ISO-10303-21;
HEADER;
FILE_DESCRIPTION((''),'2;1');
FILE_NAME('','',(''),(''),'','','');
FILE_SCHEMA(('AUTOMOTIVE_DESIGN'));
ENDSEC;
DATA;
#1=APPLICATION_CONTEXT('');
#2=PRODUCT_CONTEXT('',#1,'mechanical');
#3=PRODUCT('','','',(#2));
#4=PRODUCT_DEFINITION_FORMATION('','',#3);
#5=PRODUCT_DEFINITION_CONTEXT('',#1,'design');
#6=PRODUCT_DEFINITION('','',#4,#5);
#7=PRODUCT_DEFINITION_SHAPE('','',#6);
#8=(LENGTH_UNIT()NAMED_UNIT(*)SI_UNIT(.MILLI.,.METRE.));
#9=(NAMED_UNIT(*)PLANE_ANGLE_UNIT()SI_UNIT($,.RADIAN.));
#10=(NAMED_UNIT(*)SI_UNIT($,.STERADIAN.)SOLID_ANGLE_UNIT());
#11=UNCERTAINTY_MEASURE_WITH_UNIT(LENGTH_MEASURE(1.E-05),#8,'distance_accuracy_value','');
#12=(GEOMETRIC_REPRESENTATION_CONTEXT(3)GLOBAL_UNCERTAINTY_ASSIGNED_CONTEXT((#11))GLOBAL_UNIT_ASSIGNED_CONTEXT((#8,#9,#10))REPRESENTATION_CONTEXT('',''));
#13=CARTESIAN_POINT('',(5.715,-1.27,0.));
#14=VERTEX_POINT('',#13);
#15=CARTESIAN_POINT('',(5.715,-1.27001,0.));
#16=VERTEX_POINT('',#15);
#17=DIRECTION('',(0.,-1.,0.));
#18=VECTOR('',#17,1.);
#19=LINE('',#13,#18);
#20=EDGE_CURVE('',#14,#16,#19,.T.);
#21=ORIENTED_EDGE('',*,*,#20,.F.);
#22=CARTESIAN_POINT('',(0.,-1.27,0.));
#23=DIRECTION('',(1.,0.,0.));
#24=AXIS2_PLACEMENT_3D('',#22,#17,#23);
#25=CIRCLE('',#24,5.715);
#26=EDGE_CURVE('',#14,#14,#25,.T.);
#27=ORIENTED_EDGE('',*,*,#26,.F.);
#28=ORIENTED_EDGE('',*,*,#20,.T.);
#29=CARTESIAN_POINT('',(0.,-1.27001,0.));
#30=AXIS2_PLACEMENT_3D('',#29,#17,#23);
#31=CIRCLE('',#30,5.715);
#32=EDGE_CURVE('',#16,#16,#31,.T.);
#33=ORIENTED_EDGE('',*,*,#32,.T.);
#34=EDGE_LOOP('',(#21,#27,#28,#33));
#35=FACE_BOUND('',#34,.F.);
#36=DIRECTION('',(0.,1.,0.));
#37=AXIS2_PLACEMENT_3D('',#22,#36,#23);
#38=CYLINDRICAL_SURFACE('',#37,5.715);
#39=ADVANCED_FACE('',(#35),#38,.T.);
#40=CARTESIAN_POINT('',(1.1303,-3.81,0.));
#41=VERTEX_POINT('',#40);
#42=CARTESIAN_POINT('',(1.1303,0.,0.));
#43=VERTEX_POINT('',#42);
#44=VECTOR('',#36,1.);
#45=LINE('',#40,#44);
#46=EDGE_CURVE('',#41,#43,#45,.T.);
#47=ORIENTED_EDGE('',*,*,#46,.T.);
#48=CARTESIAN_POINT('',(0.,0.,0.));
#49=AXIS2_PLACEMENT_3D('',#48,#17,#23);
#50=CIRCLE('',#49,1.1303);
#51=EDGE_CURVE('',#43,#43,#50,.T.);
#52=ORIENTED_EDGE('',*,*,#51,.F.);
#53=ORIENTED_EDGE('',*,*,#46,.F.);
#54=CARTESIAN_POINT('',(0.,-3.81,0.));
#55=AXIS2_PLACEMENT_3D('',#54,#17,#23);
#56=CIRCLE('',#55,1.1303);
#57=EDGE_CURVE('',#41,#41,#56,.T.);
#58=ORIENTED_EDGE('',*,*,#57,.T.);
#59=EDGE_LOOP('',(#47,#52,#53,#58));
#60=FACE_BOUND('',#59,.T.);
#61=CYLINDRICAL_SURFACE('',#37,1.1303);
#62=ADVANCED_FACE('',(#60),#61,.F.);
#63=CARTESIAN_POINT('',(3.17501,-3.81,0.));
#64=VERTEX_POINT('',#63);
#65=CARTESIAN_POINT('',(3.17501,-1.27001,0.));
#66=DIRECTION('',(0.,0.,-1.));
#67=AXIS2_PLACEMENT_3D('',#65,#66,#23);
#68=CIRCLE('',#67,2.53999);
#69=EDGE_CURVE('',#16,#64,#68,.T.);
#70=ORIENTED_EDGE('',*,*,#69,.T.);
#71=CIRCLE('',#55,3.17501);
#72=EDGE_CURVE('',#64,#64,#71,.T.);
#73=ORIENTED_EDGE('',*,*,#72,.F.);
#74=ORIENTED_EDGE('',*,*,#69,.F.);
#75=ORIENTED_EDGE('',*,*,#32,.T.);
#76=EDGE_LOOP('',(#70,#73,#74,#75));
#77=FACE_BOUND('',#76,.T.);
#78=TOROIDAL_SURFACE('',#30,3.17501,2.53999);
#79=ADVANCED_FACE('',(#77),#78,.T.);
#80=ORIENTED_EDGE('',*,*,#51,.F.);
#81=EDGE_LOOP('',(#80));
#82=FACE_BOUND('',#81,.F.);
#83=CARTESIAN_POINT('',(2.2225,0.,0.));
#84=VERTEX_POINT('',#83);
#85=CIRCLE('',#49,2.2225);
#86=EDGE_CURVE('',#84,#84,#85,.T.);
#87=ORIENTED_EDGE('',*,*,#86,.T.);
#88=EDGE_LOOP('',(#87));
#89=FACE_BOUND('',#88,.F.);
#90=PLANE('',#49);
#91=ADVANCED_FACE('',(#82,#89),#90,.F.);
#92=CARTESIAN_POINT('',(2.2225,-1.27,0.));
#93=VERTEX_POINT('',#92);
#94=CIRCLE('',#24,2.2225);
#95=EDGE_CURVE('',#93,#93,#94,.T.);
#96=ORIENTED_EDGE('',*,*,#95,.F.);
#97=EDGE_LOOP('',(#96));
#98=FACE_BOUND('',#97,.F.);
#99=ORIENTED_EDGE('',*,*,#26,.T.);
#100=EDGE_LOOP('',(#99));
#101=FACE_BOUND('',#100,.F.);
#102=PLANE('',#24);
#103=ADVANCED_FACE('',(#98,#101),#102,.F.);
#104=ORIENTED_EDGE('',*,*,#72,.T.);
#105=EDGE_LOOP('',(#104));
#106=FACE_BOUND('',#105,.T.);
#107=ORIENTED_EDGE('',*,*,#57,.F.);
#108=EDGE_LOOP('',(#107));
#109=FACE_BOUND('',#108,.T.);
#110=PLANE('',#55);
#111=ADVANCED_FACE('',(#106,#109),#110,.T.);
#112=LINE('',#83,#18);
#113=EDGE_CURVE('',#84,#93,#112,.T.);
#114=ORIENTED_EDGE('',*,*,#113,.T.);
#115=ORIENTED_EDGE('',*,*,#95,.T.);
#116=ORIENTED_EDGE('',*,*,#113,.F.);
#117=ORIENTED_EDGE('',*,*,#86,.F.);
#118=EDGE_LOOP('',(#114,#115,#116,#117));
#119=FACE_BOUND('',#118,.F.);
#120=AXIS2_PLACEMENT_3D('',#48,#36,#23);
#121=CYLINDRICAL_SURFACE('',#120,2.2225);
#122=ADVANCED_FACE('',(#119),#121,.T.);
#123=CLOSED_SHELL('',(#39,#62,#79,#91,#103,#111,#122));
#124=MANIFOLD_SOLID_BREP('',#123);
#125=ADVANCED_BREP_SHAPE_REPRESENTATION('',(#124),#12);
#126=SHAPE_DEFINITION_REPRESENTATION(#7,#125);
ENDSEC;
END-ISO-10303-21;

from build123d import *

# Parameters (mm, degrees)
F0_R     = 2.2225
F0_R_2   = 1.1303
F1_DEPTH = 1.27
F2_R     = 5.715
F2_R_2   = 2.2225
F2_R_3   = 1.1303
F3_DEPTH = 2.54
F4_R     = 2.53999


# Not quite as in the source:
# - a fillet or chamfer is up to 0.001 mm smaller than in the source, because OpenCascade refuses the exact size
# - a feature of the source that left no trace in its solid (it failed there, or was rolled back) is left out


with BuildPart() as f1:
    # F0 (on Front) → F1 (new body)
    with BuildSketch(Plane.XZ):
        Circle(F0_R)
        Circle(F0_R_2, mode=Mode.SUBTRACT)
    extrude(amount=F1_DEPTH)

    # F2 (on face) → F3 (join)
    with BuildSketch(Plane.XZ.offset(1.27)):
        Circle(F2_R)
        Circle(F2_R_2, mode=Mode.SUBTRACT)
        Circle(F2_R_2)
        Circle(F2_R_3, mode=Mode.SUBTRACT)
    extrude(amount=F3_DEPTH)

    # F4 (radius 2.54 in the source; OpenCascade refuses exactly that, so slightly less here)
    f4_edges = [f1.edges().sort_by_distance(p)[0] for p in [
        (-5.715, -3.81, 0),
    ]]
    fillet(f4_edges, radius=F4_R)


solid = f1.part
